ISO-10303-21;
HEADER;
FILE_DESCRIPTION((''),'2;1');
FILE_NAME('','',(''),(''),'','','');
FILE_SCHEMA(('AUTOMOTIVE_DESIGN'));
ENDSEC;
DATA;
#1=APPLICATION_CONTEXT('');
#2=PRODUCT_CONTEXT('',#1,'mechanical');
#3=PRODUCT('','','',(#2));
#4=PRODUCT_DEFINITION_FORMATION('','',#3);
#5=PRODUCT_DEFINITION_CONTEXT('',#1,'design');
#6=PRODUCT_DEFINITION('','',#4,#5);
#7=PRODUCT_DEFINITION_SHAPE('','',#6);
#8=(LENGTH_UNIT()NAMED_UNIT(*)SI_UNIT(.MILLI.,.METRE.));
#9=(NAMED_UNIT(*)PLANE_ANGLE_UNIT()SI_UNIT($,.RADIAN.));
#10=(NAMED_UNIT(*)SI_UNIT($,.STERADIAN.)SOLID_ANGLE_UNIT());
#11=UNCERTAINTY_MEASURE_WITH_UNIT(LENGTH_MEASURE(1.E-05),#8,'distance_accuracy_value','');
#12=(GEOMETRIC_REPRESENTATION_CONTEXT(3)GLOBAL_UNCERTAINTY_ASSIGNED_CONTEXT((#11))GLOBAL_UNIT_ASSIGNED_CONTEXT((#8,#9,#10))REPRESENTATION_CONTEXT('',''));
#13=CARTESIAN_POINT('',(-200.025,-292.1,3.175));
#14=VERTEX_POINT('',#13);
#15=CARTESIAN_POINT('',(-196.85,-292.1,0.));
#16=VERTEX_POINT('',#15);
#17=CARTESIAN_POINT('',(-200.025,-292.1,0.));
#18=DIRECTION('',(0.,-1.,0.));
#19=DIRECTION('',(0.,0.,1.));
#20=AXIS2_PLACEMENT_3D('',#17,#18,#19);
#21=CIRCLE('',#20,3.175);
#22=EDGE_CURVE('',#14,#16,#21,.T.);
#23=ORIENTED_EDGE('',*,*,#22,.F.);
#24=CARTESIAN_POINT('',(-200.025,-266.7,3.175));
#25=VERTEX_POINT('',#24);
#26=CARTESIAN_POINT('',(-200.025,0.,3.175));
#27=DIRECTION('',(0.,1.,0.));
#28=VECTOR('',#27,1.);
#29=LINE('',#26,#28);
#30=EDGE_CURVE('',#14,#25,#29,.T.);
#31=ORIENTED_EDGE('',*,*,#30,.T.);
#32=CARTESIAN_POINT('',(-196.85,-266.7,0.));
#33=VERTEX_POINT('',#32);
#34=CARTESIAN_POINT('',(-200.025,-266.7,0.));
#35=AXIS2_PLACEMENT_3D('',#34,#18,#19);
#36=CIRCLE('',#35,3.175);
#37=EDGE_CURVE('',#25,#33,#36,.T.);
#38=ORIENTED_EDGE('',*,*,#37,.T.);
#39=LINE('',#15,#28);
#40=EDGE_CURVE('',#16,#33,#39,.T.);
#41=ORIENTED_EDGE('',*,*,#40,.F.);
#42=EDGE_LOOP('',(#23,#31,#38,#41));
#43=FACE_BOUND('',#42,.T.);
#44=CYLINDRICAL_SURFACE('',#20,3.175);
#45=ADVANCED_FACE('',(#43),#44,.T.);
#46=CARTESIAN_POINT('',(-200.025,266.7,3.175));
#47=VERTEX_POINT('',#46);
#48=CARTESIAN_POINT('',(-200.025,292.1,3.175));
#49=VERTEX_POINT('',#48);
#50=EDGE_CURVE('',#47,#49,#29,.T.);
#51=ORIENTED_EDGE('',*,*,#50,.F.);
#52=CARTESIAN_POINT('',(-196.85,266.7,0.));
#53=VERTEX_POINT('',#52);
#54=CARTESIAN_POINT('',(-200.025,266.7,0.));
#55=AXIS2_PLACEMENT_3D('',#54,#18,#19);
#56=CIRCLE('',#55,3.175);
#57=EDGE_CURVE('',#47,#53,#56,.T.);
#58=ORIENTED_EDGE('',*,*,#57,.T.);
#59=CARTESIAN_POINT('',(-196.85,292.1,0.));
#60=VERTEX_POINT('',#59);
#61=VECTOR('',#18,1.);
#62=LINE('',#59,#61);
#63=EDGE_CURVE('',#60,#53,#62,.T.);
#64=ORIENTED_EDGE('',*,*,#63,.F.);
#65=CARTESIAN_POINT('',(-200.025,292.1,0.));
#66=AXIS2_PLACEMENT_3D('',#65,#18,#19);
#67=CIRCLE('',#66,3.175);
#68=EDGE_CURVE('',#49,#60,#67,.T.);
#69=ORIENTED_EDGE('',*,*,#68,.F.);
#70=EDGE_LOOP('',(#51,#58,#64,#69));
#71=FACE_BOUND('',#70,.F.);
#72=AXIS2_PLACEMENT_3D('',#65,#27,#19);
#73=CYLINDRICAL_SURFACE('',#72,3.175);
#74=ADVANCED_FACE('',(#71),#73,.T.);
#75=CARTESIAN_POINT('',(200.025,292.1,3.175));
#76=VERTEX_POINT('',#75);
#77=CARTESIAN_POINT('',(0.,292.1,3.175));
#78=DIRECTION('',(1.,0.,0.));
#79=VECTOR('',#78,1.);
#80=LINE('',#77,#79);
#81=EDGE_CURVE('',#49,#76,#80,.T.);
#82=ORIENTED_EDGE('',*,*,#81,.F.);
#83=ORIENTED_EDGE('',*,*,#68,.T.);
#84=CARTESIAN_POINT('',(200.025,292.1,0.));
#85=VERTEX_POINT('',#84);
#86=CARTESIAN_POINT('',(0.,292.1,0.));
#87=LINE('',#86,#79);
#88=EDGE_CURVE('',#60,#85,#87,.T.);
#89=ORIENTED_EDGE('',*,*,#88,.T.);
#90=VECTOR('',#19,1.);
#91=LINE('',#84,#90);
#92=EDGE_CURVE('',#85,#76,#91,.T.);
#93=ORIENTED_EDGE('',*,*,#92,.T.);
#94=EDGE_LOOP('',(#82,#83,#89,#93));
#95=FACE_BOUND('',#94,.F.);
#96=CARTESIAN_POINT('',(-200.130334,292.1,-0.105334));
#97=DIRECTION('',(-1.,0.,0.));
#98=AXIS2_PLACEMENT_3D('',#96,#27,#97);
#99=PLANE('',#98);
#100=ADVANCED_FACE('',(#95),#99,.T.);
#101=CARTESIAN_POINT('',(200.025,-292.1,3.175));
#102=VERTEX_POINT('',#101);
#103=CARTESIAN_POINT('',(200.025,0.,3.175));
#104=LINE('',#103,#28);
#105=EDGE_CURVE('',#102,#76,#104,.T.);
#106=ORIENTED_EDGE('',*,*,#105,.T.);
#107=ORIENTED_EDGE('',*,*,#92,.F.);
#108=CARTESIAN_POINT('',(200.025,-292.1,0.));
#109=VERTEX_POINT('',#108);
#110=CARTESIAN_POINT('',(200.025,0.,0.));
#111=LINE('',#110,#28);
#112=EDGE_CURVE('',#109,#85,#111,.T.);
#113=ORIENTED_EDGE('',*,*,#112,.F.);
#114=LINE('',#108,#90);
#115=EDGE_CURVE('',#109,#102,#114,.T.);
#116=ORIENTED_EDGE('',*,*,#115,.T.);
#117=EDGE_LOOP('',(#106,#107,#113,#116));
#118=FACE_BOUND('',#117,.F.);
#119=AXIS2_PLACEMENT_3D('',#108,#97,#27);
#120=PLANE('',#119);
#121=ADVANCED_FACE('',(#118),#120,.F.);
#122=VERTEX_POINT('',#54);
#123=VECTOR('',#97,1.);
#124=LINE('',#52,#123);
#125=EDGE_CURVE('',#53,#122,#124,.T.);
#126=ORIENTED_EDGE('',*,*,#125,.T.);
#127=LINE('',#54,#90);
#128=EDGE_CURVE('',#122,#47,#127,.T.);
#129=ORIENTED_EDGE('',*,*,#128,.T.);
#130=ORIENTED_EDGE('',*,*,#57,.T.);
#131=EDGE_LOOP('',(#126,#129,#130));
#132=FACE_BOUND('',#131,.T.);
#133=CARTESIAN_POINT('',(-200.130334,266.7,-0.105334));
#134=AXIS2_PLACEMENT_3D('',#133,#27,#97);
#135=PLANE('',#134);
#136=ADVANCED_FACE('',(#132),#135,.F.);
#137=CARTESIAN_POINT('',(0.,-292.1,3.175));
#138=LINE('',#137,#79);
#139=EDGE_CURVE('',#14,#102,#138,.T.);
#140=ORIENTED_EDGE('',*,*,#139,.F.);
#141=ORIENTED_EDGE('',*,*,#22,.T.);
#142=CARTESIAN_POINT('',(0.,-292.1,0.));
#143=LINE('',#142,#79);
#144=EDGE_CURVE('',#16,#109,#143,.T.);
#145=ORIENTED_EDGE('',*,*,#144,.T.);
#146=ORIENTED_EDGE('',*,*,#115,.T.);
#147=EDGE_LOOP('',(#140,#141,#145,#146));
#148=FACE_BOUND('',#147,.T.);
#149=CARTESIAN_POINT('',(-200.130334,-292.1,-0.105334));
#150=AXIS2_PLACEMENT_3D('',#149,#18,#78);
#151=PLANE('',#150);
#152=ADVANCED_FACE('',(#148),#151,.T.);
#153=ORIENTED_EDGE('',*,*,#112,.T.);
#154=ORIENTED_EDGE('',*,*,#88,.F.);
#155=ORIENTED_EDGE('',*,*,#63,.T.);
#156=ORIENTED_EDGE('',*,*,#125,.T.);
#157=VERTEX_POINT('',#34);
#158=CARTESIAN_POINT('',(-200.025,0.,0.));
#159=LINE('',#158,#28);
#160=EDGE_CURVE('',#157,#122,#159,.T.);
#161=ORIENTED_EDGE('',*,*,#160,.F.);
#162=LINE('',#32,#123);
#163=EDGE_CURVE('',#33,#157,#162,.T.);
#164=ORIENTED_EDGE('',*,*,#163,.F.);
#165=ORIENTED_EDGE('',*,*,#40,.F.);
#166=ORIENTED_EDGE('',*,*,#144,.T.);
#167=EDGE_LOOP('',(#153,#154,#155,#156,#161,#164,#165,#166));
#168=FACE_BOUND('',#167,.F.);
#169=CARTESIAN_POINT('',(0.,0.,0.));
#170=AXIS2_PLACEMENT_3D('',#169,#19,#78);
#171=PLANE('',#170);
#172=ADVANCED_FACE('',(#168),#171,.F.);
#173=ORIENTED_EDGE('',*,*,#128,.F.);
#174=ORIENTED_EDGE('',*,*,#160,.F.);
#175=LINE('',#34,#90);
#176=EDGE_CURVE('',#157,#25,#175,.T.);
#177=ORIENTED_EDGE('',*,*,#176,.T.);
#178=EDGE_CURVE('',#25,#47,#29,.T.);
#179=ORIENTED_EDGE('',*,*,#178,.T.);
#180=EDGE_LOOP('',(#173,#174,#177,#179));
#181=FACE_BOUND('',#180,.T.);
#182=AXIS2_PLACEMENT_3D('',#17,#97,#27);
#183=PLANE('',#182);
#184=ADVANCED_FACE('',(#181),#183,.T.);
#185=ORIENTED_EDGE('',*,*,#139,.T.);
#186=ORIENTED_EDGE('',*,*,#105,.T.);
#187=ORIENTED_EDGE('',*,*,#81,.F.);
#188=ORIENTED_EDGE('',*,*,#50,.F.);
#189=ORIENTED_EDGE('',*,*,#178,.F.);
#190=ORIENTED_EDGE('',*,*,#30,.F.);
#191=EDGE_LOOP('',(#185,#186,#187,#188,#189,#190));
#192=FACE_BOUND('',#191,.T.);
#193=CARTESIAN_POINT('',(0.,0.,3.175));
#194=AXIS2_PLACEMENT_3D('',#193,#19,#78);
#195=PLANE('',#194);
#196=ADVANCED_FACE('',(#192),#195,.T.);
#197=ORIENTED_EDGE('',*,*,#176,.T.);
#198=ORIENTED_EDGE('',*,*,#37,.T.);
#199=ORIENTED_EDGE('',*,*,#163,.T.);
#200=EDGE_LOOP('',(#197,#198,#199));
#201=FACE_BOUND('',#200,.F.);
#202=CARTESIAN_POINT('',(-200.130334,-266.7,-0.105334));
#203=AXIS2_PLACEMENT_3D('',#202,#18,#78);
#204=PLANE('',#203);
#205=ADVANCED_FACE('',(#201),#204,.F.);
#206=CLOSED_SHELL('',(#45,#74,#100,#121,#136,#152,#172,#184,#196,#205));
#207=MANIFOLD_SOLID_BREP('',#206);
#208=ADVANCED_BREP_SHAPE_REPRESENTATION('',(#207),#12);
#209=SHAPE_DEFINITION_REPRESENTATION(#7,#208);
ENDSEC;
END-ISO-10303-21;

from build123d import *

# Parameters (mm, degrees)
F0_W     = 400.05
F0_H     = 584.2
F1_DEPTH = 3.175
F3_DEPTH = 25.4


with BuildPart() as f1:
    # F0 (on Top) → F1 (new body)
    with BuildSketch(Plane.XY):
        Rectangle(F0_W, F0_H)
    extrude(amount=F1_DEPTH)

    # F2 (on face) → F3 (join)
    with BuildSketch(Plane.XZ.offset(292.1)):
        with BuildLine():
            ThreePointArc((-200.025, 3.175), (-202.2700640303, -2.2450640303), (-196.85, 0))
            Line((-196.85, 0), (-200.025, 0))
            Line((-200.025, 0), (-200.025, 3.175))
        make_face()
    extrude(amount=-F3_DEPTH)

    # F4: F1 across plane


with BuildPart() as f1_1:
    add(f1.part)
    add(f1.part.mirror(Plane.XZ))


solid = f1_1.part
